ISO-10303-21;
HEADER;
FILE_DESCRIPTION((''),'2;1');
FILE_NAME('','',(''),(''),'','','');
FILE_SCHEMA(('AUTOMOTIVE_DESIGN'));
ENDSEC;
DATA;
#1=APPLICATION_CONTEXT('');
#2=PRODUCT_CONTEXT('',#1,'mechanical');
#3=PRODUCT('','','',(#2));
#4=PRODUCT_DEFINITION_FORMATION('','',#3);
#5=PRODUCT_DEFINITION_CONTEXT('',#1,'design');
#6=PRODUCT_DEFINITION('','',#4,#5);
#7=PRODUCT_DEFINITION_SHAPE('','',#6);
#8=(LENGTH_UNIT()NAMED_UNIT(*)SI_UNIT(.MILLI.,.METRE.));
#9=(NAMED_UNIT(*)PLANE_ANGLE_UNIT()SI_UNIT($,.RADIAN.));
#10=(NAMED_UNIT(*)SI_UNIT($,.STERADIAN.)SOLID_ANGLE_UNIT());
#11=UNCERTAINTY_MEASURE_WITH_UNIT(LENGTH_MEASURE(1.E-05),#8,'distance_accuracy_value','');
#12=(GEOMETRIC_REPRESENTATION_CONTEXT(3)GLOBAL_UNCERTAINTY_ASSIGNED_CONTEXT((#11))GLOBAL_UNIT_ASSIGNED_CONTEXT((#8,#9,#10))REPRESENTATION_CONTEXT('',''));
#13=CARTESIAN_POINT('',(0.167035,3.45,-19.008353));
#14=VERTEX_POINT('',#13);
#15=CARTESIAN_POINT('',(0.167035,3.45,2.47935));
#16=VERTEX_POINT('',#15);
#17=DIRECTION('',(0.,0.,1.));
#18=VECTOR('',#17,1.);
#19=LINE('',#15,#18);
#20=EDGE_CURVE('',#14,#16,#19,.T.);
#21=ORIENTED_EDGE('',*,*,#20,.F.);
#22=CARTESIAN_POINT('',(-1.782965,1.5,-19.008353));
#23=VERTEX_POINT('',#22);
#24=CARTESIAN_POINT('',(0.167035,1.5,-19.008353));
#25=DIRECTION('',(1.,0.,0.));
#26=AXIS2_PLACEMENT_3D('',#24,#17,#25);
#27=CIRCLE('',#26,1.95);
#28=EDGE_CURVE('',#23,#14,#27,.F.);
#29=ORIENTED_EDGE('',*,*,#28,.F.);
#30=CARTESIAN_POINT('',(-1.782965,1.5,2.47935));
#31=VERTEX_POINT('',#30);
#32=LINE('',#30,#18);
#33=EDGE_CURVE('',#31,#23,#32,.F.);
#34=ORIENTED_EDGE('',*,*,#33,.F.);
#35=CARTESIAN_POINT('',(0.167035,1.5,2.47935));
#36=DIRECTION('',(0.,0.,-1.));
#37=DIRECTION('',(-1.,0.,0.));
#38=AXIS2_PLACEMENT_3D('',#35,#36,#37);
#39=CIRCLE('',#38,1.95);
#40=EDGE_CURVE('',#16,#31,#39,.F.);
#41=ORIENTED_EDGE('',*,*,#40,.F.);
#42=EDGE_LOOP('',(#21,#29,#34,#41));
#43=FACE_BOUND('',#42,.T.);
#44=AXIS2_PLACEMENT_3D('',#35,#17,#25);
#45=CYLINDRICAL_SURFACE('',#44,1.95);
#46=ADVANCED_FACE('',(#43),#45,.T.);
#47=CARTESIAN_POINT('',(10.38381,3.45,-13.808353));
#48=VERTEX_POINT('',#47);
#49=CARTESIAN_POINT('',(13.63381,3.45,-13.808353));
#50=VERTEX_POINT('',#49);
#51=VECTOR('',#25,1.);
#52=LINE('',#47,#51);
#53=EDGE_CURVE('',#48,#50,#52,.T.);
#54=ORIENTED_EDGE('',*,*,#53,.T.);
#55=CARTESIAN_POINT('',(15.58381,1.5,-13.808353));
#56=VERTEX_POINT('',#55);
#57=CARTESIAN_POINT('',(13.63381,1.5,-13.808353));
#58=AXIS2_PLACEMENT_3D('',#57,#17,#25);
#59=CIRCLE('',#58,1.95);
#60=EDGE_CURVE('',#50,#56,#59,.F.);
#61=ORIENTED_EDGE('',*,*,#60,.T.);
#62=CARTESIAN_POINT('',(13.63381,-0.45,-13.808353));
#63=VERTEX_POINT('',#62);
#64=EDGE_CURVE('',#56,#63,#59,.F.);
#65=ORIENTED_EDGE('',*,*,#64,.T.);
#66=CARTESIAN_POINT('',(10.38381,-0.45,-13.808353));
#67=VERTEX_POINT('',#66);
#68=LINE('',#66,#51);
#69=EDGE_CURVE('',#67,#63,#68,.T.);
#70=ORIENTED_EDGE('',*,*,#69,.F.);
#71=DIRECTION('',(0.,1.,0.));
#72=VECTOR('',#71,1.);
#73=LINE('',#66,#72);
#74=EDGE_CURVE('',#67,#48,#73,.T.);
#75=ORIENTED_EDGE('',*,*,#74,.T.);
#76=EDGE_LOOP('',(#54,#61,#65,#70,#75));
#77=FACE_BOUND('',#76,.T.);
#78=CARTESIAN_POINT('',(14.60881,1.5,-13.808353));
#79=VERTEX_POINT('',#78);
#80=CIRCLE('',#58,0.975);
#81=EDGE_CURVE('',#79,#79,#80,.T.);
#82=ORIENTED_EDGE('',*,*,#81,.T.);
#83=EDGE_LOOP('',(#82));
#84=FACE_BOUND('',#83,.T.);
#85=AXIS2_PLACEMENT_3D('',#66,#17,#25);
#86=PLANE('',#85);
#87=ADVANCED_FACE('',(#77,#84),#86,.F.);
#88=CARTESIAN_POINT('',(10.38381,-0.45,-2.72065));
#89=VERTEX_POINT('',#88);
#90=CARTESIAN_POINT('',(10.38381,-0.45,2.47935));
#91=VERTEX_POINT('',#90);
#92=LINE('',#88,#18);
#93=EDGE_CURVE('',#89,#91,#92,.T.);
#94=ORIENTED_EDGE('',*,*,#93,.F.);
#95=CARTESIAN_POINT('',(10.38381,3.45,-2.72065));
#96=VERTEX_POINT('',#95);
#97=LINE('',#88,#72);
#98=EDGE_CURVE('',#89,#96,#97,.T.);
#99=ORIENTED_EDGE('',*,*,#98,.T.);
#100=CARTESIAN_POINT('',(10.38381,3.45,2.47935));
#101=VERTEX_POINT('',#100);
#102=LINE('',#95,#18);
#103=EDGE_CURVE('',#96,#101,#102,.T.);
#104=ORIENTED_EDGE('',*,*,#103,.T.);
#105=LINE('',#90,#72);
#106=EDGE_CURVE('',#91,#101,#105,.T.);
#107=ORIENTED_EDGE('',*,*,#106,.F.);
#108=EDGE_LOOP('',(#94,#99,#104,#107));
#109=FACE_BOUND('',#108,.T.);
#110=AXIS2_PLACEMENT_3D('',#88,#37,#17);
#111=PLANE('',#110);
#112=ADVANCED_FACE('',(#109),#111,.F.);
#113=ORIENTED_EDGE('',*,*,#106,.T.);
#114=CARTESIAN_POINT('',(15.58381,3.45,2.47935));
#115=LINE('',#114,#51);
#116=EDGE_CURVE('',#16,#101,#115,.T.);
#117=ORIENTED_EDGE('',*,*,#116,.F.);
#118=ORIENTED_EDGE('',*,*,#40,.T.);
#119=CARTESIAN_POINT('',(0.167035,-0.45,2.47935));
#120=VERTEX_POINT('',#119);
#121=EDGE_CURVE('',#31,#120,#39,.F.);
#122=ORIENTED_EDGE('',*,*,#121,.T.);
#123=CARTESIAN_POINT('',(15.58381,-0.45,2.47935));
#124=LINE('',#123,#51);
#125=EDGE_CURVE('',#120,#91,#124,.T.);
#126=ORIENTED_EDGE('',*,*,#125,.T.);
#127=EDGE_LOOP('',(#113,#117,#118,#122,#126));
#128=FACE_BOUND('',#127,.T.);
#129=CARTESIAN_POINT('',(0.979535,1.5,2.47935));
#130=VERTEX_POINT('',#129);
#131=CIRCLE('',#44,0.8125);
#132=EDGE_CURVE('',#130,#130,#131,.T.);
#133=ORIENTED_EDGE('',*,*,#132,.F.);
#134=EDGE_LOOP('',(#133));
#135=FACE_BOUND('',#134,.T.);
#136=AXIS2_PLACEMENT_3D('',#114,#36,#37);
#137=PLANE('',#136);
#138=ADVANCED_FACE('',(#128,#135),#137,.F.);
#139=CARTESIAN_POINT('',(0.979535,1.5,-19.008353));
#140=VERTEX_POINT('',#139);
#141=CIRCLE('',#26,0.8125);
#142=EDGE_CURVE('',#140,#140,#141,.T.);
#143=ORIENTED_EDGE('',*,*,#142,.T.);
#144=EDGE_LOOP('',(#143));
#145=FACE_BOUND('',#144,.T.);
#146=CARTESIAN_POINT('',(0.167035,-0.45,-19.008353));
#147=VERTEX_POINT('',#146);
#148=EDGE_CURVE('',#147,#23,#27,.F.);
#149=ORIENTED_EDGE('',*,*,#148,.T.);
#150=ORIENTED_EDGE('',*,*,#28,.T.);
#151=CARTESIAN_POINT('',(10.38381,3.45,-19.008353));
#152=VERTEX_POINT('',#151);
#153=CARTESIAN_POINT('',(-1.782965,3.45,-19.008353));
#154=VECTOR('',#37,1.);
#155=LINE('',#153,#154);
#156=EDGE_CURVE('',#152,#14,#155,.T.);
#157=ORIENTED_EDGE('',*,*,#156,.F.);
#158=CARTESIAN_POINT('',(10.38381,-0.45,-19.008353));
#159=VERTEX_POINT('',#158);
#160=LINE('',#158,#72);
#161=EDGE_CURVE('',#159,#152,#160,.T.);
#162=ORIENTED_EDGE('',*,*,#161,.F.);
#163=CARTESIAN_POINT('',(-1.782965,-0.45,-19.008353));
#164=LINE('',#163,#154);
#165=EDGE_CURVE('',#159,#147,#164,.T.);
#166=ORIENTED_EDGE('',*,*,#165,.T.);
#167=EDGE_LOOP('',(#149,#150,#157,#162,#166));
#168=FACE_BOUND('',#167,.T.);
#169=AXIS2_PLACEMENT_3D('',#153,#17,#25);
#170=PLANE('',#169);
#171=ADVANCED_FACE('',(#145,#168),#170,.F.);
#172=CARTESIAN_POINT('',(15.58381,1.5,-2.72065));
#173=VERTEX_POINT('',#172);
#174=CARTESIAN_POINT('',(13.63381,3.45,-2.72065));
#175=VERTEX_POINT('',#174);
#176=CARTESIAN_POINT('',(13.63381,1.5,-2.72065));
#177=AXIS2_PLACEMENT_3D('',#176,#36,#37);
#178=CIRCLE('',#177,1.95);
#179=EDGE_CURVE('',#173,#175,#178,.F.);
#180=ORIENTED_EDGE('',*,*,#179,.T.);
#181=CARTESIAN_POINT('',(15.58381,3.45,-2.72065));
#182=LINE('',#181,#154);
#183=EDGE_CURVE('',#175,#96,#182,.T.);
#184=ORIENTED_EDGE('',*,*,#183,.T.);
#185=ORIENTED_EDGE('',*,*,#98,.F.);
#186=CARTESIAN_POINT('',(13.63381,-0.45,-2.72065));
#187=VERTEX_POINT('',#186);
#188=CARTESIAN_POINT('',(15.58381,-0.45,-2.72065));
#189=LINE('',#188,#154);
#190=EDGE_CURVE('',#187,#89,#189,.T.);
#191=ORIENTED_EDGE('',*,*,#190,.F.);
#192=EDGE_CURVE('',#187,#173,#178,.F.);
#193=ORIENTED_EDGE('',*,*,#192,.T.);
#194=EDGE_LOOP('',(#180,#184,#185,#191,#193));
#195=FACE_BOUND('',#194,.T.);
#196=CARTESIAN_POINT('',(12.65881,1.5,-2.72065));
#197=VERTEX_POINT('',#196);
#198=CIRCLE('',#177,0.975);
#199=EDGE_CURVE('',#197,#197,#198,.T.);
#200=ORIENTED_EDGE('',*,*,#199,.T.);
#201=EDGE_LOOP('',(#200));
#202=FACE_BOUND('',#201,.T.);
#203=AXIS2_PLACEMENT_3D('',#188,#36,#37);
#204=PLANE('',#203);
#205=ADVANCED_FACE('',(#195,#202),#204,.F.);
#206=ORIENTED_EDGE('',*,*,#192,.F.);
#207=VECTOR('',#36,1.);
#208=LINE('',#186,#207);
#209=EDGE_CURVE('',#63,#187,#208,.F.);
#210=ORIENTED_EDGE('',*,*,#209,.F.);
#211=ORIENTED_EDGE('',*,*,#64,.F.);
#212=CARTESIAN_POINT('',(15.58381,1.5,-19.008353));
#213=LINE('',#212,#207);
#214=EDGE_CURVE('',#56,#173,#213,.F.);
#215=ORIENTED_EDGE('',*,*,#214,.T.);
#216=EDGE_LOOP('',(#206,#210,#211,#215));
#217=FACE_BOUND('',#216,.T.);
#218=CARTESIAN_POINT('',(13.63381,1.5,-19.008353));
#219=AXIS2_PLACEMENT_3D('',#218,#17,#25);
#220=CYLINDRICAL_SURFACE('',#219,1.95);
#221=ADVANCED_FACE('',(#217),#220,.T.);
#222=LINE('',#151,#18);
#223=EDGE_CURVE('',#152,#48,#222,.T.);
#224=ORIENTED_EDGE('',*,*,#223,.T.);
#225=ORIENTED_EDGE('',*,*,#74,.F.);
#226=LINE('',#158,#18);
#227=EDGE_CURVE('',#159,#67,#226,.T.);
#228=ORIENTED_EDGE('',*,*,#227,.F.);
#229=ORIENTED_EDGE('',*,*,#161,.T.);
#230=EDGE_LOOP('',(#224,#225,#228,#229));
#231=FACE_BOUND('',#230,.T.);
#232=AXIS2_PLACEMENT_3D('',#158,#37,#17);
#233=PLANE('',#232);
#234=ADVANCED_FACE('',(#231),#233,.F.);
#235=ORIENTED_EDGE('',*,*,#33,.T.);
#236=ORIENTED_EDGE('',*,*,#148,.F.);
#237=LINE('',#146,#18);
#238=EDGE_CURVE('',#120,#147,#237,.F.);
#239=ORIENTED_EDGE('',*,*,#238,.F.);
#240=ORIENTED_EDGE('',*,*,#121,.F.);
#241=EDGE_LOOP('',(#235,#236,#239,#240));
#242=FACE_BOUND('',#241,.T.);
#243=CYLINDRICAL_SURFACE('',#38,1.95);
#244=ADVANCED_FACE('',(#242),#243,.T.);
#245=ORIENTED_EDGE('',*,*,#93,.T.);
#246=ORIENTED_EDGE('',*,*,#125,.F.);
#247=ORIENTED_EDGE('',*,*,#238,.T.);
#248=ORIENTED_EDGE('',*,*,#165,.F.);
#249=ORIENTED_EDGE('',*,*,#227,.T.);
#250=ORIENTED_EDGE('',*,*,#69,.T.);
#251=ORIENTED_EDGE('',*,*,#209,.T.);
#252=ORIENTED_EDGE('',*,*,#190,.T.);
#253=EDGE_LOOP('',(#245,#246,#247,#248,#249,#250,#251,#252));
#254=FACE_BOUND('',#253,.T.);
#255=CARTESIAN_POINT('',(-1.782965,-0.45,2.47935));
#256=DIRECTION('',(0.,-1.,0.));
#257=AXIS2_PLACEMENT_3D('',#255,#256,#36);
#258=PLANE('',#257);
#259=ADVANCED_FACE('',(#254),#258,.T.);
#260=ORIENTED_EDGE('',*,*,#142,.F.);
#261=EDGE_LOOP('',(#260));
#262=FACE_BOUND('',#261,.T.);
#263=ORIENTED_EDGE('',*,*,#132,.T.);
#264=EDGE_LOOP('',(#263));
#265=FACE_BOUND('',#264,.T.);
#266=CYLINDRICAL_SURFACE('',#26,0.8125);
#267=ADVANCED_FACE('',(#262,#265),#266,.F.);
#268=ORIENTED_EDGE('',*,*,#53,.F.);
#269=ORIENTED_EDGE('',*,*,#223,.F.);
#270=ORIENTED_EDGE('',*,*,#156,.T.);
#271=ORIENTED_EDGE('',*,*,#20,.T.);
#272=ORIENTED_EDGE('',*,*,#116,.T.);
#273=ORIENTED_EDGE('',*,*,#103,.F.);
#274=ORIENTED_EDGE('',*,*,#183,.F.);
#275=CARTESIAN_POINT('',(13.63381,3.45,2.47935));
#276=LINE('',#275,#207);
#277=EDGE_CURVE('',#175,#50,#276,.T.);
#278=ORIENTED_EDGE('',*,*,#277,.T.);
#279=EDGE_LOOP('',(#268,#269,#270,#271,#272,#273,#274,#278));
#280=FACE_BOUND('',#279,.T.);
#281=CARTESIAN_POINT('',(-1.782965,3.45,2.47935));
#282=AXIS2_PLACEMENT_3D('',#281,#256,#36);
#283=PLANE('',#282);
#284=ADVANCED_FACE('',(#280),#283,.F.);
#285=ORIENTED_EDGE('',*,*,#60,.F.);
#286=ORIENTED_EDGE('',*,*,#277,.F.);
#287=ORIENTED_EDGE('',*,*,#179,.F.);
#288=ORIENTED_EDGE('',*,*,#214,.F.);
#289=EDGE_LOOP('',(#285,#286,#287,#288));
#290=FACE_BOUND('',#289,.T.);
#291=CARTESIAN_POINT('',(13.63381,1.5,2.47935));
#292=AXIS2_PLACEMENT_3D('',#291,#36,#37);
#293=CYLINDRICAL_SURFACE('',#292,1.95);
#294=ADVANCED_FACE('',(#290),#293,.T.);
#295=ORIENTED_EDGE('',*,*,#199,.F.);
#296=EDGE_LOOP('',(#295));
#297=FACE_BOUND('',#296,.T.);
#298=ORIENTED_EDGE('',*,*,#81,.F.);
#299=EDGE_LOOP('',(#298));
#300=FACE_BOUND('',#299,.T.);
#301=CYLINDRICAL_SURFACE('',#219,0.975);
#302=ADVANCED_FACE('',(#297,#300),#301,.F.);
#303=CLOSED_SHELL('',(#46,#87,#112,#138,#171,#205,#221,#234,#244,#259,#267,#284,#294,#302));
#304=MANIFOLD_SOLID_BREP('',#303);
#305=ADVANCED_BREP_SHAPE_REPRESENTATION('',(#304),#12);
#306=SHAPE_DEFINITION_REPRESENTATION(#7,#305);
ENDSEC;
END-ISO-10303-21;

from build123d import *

# Parameters (mm, degrees)
SKETCH1_W           = 13.359057051
SKETCH1_H           = 16.529002792
BOSS_EXTRUDE1_DEPTH = 3
SKETCH2_W           = 4
SKETCH2_H           = 4
CUT_EXTRUDE1_DEPTH  = 22.463278841
FILLET1_R           = 1.5
SKETCH5_R           = 0.625
SKETCH5_R_2         = 0.75
CUT_EXTRUDE3_DEPTH  = 22.463278841
SCALE1_SCALE        = 1.3


with BuildPart() as part:
    # Sketch1 → Boss-Extrude1 (new body)
    with BuildSketch(Plane(origin=(0, 0, 0), x_dir=(1, 0, 0), z_dir=(0, 1, 0))):
        with Locations((6.679528526, 8.264501396)):
            Rectangle(SKETCH1_W, SKETCH1_H)
    extrude(amount=BOSS_EXTRUDE1_DEPTH)

    # Sketch2 → Cut-Extrude1 (cut, through all)
    with BuildSketch(Plane(origin=(0, 3, 0), x_dir=(1, 0, 0), z_dir=(0, 1, 0))):
        with Locations((11.359057051, 14.529002792)):
            Rectangle(SKETCH2_W, SKETCH2_H)
        with Locations((11.359057051, 2)):
            Rectangle(SKETCH2_W, SKETCH2_H)
    extrude(amount=-CUT_EXTRUDE1_DEPTH, mode=Mode.SUBTRACT)

    # Fillet1
    fillet1_edges = [part.edges().sort_by_distance(p)[0] for p in [
        (13.359057051, 0, -8.264501396),
        (13.359057051, 3, -8.264501396),
        (0, 0, -8.264501396),
        (0, 3, -8.264501396),
    ]]
    fillet(fillet1_edges, radius=FILLET1_R - 0.0001)  # a hair under: the kernel refuses the full size

    # Sketch5 → Cut-Extrude3 (cut, through all)
    with BuildSketch(Plane.XY):
        with Locations((1.5, 1.5)):
            Circle(SKETCH5_R)
        with Locations((11.859057051, 1.5)):
            Circle(SKETCH5_R_2)
    extrude(amount=-CUT_EXTRUDE3_DEPTH, mode=Mode.SUBTRACT)


with BuildPart() as part_1:
    # Scale1: scaled about (5.943207595, 1.5, -8.264501396)
    add(part.part.scale(SCALE1_SCALE).moved(Location((-1.782962279, -0.45, 2.479350419))))


solid = part_1.part
